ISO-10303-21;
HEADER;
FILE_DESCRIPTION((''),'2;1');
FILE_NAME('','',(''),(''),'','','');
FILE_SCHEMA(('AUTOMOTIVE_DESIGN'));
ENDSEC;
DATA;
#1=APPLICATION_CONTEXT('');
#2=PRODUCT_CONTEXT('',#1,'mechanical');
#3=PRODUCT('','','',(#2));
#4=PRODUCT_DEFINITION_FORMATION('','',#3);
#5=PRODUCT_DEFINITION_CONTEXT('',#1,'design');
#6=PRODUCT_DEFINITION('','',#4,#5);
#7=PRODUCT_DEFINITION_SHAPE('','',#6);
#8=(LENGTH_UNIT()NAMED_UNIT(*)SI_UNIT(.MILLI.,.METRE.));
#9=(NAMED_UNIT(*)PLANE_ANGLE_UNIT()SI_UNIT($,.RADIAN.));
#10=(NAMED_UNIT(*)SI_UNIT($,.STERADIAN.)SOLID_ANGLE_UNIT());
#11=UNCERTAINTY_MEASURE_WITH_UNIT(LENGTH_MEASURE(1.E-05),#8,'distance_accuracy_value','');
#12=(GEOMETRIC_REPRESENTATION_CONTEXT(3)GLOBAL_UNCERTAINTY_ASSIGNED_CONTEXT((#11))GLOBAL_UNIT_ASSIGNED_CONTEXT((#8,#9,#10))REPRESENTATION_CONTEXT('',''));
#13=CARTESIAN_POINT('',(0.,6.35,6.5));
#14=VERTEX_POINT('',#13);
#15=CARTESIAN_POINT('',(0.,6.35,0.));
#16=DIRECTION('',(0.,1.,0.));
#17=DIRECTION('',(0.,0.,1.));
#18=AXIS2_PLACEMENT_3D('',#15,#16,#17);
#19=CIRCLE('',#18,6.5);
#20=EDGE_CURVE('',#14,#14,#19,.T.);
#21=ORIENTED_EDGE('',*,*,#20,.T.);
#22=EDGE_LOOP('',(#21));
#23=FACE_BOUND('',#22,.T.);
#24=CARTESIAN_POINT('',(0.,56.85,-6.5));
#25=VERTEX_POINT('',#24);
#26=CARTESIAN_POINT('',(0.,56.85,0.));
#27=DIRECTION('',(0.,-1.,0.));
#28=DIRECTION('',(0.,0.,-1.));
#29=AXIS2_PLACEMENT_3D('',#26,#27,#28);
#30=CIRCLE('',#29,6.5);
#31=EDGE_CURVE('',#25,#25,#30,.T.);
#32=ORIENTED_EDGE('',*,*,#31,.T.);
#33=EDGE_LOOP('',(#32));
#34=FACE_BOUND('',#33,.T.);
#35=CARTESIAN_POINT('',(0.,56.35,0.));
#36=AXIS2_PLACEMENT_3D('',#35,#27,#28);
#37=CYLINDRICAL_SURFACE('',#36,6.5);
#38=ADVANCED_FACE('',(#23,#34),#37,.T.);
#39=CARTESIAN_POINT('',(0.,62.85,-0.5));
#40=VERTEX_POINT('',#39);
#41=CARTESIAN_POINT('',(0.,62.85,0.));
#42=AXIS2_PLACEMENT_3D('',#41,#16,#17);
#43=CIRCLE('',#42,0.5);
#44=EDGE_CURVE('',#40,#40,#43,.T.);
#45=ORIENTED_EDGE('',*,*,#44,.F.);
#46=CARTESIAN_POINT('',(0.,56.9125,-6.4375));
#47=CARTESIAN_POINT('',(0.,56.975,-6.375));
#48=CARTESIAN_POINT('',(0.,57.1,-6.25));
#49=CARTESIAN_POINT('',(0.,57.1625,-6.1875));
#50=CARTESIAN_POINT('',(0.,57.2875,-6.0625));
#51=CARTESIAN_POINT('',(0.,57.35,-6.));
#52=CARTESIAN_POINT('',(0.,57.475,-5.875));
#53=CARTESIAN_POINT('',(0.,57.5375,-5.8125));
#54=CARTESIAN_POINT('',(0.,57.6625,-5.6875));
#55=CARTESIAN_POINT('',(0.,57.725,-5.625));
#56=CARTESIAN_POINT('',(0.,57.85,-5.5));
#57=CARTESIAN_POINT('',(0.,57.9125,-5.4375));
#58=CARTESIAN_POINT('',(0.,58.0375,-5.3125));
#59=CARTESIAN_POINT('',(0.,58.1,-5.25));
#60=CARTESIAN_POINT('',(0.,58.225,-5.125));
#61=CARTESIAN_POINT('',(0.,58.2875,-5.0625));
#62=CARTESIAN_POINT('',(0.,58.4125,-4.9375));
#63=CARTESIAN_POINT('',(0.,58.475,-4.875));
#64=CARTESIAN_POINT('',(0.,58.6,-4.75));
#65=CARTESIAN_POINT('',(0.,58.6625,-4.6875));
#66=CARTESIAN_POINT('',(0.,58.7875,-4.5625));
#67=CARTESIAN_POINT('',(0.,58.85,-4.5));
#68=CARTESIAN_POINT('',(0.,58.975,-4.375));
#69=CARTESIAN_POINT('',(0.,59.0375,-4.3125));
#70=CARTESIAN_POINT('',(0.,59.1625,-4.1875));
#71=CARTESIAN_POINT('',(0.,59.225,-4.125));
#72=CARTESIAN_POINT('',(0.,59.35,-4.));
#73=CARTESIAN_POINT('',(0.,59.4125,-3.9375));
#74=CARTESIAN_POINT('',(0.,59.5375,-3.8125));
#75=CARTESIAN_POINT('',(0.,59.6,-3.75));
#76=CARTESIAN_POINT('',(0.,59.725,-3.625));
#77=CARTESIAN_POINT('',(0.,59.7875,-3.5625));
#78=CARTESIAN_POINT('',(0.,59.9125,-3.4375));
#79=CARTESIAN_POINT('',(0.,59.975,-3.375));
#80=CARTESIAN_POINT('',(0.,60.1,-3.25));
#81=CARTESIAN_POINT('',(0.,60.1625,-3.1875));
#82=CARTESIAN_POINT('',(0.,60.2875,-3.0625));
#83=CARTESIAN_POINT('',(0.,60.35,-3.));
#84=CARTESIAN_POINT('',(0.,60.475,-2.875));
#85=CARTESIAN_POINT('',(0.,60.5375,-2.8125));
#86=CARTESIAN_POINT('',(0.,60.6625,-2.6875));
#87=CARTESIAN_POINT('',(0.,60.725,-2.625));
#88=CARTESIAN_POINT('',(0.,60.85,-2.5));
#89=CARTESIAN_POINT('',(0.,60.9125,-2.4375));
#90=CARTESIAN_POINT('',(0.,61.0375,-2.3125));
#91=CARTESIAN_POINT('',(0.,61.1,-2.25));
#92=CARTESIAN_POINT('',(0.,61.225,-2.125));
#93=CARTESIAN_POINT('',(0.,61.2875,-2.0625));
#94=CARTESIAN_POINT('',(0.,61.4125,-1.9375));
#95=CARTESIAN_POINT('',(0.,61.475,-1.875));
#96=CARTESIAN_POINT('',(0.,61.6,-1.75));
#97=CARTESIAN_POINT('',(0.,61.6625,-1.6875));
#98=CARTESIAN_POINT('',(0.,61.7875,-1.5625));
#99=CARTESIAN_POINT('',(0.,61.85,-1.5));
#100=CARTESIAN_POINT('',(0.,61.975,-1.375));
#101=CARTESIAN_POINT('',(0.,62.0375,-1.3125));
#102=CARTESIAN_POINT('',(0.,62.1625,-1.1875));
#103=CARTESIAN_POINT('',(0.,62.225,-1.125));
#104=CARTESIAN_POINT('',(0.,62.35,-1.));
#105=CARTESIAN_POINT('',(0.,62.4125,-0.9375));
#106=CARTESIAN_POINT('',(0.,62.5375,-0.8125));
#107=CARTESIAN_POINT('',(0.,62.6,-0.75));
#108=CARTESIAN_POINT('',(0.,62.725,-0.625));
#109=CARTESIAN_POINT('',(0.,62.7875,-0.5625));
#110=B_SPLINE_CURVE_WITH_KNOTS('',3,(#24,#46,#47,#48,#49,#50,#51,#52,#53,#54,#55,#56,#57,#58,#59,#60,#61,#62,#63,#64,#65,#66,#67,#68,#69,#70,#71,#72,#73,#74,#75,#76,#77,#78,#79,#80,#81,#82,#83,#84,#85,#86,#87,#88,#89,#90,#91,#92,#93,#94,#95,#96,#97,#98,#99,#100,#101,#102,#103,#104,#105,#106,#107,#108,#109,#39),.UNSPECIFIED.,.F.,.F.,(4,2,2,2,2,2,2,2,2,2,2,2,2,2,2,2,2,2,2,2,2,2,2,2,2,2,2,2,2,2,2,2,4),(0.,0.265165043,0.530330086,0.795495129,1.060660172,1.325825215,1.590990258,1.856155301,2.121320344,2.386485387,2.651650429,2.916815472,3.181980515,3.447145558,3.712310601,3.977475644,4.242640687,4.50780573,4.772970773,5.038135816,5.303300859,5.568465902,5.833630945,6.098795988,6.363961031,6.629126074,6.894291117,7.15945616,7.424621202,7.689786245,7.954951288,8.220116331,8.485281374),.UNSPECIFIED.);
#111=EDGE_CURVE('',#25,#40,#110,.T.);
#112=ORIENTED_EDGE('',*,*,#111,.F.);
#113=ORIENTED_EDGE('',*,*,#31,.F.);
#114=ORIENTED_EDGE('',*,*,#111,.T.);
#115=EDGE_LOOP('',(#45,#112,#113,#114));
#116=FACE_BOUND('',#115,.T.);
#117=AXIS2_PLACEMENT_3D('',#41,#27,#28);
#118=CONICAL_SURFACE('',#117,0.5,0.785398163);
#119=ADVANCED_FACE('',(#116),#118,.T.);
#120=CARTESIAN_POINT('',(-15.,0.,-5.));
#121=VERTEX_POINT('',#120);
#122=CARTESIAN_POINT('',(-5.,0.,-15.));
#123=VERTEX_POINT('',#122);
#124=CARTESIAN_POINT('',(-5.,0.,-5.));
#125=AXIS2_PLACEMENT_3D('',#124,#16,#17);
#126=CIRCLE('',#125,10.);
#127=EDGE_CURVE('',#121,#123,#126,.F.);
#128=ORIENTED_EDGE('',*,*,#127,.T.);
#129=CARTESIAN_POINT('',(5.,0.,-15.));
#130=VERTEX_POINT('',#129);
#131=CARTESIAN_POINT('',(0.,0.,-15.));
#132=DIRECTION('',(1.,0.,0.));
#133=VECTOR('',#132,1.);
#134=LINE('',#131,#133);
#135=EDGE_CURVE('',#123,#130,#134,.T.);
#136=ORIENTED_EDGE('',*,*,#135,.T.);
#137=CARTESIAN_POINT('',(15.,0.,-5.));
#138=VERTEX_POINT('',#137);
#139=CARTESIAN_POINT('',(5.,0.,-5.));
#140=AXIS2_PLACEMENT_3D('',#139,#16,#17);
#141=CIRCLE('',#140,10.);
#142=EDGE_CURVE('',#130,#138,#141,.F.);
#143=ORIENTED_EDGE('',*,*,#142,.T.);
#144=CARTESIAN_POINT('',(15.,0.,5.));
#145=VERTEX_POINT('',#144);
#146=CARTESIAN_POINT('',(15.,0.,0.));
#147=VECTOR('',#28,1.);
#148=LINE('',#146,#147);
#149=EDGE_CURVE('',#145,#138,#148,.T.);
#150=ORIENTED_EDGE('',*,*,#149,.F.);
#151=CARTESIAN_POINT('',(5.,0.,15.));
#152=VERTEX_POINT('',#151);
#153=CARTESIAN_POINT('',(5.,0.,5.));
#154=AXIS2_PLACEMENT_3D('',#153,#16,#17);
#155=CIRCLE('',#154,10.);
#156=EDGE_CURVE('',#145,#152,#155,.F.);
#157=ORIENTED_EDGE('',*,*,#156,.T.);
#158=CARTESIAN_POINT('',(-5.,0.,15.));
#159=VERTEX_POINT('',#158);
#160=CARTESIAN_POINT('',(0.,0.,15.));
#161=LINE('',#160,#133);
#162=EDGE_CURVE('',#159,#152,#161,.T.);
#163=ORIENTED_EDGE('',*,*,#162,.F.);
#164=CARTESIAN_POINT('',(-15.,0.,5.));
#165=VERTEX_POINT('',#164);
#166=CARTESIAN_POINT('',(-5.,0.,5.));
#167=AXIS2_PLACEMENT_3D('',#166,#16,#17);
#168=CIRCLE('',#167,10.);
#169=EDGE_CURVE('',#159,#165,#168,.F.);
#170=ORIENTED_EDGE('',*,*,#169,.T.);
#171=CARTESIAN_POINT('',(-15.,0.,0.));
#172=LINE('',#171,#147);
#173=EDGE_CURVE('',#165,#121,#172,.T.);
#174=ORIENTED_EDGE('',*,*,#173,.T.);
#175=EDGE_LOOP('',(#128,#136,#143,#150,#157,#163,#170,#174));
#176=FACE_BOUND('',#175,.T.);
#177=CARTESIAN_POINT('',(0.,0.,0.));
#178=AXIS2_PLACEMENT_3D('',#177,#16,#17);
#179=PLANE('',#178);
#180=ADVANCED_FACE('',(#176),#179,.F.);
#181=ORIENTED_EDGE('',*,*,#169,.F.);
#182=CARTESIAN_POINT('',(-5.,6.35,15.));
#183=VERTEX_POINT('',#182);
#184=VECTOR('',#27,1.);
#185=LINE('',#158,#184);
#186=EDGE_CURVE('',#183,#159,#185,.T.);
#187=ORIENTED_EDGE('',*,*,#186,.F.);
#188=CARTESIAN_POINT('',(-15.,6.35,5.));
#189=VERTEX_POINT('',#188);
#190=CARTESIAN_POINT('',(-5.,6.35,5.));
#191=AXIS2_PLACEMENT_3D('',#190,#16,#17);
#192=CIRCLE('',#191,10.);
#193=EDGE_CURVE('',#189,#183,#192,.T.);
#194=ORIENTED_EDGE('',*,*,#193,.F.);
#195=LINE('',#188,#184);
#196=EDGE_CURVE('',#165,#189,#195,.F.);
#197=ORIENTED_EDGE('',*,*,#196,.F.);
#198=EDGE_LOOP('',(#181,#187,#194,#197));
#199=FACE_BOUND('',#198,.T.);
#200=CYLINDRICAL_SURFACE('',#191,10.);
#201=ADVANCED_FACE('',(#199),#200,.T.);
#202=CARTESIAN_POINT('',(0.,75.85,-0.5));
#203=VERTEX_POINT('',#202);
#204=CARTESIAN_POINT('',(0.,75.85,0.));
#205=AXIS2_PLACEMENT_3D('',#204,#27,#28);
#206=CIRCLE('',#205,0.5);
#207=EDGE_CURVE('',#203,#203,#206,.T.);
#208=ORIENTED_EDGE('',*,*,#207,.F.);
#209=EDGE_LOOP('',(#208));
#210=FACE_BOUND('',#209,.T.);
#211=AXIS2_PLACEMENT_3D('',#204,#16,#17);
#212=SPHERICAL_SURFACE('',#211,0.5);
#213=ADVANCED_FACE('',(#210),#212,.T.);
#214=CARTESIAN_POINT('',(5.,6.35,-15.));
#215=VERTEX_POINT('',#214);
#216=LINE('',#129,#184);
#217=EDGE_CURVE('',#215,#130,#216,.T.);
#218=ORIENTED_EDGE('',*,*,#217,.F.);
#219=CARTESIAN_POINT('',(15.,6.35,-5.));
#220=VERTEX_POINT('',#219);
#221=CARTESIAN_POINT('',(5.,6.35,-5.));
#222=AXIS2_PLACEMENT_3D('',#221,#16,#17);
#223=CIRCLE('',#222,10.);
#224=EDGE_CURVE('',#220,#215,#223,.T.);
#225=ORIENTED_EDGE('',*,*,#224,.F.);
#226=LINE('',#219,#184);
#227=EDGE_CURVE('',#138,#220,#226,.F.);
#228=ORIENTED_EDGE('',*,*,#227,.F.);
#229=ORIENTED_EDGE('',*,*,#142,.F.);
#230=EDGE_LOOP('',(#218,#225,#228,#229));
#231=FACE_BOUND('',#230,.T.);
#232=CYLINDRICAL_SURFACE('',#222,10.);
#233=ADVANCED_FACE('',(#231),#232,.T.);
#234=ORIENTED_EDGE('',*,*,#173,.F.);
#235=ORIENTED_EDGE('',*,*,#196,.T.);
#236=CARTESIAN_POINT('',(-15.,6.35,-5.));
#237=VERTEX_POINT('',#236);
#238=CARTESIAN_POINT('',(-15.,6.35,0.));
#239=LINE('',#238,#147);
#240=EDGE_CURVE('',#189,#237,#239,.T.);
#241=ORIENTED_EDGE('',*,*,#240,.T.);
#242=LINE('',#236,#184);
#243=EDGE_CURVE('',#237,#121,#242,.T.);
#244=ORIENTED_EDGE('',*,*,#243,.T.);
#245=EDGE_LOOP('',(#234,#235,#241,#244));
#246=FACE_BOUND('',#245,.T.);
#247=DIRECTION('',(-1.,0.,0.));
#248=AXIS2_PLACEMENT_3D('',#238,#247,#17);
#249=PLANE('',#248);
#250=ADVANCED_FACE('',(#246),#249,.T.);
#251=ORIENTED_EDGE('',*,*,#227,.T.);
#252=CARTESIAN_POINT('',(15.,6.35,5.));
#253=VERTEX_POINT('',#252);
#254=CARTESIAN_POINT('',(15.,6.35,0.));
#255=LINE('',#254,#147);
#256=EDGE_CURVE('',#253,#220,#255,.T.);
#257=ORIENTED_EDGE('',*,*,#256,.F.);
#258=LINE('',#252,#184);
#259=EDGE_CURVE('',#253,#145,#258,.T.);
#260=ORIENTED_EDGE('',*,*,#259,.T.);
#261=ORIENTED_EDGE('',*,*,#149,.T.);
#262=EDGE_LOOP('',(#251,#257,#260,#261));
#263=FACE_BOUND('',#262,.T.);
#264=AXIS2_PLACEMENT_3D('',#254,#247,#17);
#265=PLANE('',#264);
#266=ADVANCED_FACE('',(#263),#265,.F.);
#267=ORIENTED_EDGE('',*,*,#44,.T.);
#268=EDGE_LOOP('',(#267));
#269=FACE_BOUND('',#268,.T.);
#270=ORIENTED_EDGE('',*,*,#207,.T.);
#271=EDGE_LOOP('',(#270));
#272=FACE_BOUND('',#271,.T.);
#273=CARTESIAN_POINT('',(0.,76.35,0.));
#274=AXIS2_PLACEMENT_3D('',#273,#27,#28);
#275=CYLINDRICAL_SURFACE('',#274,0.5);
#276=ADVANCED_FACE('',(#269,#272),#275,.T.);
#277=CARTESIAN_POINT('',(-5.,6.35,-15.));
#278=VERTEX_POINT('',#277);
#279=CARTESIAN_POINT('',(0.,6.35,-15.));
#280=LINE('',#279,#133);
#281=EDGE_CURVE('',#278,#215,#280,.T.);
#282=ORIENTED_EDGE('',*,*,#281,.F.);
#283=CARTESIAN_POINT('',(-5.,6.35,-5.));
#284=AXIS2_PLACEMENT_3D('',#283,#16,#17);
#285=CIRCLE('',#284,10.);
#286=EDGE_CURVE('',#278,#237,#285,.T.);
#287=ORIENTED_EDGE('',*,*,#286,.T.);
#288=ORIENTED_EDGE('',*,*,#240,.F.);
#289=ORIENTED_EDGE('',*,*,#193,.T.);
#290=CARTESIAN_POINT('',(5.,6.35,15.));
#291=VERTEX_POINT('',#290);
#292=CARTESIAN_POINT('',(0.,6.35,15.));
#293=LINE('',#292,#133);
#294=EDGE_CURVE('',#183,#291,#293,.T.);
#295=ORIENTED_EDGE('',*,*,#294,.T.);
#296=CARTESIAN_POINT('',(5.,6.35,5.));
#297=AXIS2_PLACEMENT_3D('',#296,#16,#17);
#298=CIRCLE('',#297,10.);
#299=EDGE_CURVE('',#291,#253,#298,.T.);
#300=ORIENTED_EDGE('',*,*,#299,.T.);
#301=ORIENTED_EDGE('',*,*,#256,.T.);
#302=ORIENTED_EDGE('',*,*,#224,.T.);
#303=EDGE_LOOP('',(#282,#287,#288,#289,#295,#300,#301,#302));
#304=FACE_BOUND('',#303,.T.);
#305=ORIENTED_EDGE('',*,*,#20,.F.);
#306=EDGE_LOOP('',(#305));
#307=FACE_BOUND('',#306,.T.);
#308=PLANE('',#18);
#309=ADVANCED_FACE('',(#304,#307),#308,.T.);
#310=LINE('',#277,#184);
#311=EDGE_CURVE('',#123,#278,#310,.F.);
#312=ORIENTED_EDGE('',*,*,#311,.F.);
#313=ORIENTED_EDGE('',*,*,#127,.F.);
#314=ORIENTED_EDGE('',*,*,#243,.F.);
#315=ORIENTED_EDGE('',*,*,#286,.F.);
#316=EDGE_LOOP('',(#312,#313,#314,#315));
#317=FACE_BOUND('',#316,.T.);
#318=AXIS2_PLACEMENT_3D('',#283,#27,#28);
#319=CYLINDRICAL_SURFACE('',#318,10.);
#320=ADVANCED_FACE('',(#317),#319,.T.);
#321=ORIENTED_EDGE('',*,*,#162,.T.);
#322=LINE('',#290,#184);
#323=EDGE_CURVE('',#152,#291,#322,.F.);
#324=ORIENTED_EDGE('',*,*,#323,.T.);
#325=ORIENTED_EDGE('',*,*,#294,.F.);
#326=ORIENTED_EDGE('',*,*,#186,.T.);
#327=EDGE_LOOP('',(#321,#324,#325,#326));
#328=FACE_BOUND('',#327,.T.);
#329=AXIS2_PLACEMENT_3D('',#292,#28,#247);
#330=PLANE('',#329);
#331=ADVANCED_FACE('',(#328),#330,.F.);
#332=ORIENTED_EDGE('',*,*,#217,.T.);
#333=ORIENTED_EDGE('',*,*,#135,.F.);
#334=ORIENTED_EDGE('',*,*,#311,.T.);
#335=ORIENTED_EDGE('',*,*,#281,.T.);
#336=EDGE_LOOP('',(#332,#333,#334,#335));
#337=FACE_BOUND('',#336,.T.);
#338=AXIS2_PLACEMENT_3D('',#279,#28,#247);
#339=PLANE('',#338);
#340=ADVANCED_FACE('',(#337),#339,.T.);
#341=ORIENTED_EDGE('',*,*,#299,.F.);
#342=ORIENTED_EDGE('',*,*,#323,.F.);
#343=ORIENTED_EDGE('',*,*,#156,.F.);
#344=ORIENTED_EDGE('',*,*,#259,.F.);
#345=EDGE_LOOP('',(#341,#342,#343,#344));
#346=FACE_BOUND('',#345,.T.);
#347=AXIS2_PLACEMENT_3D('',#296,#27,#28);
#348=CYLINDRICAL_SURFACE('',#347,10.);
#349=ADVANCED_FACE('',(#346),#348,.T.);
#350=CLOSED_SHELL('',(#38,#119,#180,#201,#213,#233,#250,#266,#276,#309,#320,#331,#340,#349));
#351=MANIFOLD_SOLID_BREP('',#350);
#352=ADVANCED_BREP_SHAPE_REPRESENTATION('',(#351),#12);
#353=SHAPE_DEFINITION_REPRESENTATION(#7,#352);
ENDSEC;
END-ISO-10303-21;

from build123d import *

# Parameters (mm, degrees)
SKETCH2_W           = 30
SKETCH2_H           = 30
BOSS_EXTRUDE1_DEPTH = 6.35
FILLET1_R           = 10
SKETCH3_R           = 6.5
BOSS_EXTRUDE2_DEPTH = 50
SKETCH4_R           = 0.5
BOSS_EXTRUDE3_DEPTH = 20
FILLET2_R           = 0.5
CHAMFER1_SIZE       = 6.5


with BuildPart() as part:
    # Sketch2 → Boss-Extrude1 (new body)
    with BuildSketch(Plane(origin=(0, 0, 0), x_dir=(1, 0, 0), z_dir=(0, 1, 0))):
        Rectangle(SKETCH2_W, SKETCH2_H)
    extrude(amount=BOSS_EXTRUDE1_DEPTH)

    # Fillet1
    fillet1_edges = [part.edges().sort_by_distance(p)[0] for p in [
        (-15, 3.175, 15),
        (-15, 3.175, -15),
        (15, 3.175, -15),
        (15, 3.175, 15),
    ]]
    fillet(fillet1_edges, radius=FILLET1_R)

    # Sketch3 → Boss-Extrude2 (add)
    with BuildSketch(Plane(origin=(0, 6.35, 0), x_dir=(1, 0, 0), z_dir=(0, 1, 0))):
        with Locations(Location((0, 0, 0), (0, 0, 270))):
            Circle(SKETCH3_R)
    extrude(amount=BOSS_EXTRUDE2_DEPTH)

    # Sketch4 → Boss-Extrude3 (add)
    with BuildSketch(Plane(origin=(0, 56.35, 0), x_dir=(1, 0, 0), z_dir=(0, 1, 0))):
        with Locations(Location((0, 0, 0), (0, 0, 270))):
            Circle(SKETCH4_R)
    extrude(amount=BOSS_EXTRUDE3_DEPTH)

    # Fillet2
    fillet2_edges = [part.edges().sort_by_distance(p)[0] for p in [
        (0, 76.35, -0.5),
    ]]
    fillet(fillet2_edges, radius=FILLET2_R)

    # Chamfer1
    # the kernel refuses this chamfer: 6.5 mm, written as the material it adds along each edge
    with BuildSketch(Plane(origin=(0, 56.35, 0), x_dir=(0, 0, 1), z_dir=(-1, 0, 0))) as chamfer1_piece_1_section:
        Polygon((0.5, CHAMFER1_SIZE), (0.5 + CHAMFER1_SIZE, 0), (0.5, 0), align=None)
    chamfer1_piece_1 = revolve(axis=Axis((0, 56.35, 0), (0, 1, 0)), mode=Mode.PRIVATE)
    chamfer1_piece_1 = chamfer1_piece_1 & Plane(origin=(0, 59.89101351, 0), x_dir=(0, 0, 1), z_dir=(0, -1, 0)) * Cylinder(6.5, 28, mode=Mode.PRIVATE)
    add(chamfer1_piece_1)


solid = part.part
